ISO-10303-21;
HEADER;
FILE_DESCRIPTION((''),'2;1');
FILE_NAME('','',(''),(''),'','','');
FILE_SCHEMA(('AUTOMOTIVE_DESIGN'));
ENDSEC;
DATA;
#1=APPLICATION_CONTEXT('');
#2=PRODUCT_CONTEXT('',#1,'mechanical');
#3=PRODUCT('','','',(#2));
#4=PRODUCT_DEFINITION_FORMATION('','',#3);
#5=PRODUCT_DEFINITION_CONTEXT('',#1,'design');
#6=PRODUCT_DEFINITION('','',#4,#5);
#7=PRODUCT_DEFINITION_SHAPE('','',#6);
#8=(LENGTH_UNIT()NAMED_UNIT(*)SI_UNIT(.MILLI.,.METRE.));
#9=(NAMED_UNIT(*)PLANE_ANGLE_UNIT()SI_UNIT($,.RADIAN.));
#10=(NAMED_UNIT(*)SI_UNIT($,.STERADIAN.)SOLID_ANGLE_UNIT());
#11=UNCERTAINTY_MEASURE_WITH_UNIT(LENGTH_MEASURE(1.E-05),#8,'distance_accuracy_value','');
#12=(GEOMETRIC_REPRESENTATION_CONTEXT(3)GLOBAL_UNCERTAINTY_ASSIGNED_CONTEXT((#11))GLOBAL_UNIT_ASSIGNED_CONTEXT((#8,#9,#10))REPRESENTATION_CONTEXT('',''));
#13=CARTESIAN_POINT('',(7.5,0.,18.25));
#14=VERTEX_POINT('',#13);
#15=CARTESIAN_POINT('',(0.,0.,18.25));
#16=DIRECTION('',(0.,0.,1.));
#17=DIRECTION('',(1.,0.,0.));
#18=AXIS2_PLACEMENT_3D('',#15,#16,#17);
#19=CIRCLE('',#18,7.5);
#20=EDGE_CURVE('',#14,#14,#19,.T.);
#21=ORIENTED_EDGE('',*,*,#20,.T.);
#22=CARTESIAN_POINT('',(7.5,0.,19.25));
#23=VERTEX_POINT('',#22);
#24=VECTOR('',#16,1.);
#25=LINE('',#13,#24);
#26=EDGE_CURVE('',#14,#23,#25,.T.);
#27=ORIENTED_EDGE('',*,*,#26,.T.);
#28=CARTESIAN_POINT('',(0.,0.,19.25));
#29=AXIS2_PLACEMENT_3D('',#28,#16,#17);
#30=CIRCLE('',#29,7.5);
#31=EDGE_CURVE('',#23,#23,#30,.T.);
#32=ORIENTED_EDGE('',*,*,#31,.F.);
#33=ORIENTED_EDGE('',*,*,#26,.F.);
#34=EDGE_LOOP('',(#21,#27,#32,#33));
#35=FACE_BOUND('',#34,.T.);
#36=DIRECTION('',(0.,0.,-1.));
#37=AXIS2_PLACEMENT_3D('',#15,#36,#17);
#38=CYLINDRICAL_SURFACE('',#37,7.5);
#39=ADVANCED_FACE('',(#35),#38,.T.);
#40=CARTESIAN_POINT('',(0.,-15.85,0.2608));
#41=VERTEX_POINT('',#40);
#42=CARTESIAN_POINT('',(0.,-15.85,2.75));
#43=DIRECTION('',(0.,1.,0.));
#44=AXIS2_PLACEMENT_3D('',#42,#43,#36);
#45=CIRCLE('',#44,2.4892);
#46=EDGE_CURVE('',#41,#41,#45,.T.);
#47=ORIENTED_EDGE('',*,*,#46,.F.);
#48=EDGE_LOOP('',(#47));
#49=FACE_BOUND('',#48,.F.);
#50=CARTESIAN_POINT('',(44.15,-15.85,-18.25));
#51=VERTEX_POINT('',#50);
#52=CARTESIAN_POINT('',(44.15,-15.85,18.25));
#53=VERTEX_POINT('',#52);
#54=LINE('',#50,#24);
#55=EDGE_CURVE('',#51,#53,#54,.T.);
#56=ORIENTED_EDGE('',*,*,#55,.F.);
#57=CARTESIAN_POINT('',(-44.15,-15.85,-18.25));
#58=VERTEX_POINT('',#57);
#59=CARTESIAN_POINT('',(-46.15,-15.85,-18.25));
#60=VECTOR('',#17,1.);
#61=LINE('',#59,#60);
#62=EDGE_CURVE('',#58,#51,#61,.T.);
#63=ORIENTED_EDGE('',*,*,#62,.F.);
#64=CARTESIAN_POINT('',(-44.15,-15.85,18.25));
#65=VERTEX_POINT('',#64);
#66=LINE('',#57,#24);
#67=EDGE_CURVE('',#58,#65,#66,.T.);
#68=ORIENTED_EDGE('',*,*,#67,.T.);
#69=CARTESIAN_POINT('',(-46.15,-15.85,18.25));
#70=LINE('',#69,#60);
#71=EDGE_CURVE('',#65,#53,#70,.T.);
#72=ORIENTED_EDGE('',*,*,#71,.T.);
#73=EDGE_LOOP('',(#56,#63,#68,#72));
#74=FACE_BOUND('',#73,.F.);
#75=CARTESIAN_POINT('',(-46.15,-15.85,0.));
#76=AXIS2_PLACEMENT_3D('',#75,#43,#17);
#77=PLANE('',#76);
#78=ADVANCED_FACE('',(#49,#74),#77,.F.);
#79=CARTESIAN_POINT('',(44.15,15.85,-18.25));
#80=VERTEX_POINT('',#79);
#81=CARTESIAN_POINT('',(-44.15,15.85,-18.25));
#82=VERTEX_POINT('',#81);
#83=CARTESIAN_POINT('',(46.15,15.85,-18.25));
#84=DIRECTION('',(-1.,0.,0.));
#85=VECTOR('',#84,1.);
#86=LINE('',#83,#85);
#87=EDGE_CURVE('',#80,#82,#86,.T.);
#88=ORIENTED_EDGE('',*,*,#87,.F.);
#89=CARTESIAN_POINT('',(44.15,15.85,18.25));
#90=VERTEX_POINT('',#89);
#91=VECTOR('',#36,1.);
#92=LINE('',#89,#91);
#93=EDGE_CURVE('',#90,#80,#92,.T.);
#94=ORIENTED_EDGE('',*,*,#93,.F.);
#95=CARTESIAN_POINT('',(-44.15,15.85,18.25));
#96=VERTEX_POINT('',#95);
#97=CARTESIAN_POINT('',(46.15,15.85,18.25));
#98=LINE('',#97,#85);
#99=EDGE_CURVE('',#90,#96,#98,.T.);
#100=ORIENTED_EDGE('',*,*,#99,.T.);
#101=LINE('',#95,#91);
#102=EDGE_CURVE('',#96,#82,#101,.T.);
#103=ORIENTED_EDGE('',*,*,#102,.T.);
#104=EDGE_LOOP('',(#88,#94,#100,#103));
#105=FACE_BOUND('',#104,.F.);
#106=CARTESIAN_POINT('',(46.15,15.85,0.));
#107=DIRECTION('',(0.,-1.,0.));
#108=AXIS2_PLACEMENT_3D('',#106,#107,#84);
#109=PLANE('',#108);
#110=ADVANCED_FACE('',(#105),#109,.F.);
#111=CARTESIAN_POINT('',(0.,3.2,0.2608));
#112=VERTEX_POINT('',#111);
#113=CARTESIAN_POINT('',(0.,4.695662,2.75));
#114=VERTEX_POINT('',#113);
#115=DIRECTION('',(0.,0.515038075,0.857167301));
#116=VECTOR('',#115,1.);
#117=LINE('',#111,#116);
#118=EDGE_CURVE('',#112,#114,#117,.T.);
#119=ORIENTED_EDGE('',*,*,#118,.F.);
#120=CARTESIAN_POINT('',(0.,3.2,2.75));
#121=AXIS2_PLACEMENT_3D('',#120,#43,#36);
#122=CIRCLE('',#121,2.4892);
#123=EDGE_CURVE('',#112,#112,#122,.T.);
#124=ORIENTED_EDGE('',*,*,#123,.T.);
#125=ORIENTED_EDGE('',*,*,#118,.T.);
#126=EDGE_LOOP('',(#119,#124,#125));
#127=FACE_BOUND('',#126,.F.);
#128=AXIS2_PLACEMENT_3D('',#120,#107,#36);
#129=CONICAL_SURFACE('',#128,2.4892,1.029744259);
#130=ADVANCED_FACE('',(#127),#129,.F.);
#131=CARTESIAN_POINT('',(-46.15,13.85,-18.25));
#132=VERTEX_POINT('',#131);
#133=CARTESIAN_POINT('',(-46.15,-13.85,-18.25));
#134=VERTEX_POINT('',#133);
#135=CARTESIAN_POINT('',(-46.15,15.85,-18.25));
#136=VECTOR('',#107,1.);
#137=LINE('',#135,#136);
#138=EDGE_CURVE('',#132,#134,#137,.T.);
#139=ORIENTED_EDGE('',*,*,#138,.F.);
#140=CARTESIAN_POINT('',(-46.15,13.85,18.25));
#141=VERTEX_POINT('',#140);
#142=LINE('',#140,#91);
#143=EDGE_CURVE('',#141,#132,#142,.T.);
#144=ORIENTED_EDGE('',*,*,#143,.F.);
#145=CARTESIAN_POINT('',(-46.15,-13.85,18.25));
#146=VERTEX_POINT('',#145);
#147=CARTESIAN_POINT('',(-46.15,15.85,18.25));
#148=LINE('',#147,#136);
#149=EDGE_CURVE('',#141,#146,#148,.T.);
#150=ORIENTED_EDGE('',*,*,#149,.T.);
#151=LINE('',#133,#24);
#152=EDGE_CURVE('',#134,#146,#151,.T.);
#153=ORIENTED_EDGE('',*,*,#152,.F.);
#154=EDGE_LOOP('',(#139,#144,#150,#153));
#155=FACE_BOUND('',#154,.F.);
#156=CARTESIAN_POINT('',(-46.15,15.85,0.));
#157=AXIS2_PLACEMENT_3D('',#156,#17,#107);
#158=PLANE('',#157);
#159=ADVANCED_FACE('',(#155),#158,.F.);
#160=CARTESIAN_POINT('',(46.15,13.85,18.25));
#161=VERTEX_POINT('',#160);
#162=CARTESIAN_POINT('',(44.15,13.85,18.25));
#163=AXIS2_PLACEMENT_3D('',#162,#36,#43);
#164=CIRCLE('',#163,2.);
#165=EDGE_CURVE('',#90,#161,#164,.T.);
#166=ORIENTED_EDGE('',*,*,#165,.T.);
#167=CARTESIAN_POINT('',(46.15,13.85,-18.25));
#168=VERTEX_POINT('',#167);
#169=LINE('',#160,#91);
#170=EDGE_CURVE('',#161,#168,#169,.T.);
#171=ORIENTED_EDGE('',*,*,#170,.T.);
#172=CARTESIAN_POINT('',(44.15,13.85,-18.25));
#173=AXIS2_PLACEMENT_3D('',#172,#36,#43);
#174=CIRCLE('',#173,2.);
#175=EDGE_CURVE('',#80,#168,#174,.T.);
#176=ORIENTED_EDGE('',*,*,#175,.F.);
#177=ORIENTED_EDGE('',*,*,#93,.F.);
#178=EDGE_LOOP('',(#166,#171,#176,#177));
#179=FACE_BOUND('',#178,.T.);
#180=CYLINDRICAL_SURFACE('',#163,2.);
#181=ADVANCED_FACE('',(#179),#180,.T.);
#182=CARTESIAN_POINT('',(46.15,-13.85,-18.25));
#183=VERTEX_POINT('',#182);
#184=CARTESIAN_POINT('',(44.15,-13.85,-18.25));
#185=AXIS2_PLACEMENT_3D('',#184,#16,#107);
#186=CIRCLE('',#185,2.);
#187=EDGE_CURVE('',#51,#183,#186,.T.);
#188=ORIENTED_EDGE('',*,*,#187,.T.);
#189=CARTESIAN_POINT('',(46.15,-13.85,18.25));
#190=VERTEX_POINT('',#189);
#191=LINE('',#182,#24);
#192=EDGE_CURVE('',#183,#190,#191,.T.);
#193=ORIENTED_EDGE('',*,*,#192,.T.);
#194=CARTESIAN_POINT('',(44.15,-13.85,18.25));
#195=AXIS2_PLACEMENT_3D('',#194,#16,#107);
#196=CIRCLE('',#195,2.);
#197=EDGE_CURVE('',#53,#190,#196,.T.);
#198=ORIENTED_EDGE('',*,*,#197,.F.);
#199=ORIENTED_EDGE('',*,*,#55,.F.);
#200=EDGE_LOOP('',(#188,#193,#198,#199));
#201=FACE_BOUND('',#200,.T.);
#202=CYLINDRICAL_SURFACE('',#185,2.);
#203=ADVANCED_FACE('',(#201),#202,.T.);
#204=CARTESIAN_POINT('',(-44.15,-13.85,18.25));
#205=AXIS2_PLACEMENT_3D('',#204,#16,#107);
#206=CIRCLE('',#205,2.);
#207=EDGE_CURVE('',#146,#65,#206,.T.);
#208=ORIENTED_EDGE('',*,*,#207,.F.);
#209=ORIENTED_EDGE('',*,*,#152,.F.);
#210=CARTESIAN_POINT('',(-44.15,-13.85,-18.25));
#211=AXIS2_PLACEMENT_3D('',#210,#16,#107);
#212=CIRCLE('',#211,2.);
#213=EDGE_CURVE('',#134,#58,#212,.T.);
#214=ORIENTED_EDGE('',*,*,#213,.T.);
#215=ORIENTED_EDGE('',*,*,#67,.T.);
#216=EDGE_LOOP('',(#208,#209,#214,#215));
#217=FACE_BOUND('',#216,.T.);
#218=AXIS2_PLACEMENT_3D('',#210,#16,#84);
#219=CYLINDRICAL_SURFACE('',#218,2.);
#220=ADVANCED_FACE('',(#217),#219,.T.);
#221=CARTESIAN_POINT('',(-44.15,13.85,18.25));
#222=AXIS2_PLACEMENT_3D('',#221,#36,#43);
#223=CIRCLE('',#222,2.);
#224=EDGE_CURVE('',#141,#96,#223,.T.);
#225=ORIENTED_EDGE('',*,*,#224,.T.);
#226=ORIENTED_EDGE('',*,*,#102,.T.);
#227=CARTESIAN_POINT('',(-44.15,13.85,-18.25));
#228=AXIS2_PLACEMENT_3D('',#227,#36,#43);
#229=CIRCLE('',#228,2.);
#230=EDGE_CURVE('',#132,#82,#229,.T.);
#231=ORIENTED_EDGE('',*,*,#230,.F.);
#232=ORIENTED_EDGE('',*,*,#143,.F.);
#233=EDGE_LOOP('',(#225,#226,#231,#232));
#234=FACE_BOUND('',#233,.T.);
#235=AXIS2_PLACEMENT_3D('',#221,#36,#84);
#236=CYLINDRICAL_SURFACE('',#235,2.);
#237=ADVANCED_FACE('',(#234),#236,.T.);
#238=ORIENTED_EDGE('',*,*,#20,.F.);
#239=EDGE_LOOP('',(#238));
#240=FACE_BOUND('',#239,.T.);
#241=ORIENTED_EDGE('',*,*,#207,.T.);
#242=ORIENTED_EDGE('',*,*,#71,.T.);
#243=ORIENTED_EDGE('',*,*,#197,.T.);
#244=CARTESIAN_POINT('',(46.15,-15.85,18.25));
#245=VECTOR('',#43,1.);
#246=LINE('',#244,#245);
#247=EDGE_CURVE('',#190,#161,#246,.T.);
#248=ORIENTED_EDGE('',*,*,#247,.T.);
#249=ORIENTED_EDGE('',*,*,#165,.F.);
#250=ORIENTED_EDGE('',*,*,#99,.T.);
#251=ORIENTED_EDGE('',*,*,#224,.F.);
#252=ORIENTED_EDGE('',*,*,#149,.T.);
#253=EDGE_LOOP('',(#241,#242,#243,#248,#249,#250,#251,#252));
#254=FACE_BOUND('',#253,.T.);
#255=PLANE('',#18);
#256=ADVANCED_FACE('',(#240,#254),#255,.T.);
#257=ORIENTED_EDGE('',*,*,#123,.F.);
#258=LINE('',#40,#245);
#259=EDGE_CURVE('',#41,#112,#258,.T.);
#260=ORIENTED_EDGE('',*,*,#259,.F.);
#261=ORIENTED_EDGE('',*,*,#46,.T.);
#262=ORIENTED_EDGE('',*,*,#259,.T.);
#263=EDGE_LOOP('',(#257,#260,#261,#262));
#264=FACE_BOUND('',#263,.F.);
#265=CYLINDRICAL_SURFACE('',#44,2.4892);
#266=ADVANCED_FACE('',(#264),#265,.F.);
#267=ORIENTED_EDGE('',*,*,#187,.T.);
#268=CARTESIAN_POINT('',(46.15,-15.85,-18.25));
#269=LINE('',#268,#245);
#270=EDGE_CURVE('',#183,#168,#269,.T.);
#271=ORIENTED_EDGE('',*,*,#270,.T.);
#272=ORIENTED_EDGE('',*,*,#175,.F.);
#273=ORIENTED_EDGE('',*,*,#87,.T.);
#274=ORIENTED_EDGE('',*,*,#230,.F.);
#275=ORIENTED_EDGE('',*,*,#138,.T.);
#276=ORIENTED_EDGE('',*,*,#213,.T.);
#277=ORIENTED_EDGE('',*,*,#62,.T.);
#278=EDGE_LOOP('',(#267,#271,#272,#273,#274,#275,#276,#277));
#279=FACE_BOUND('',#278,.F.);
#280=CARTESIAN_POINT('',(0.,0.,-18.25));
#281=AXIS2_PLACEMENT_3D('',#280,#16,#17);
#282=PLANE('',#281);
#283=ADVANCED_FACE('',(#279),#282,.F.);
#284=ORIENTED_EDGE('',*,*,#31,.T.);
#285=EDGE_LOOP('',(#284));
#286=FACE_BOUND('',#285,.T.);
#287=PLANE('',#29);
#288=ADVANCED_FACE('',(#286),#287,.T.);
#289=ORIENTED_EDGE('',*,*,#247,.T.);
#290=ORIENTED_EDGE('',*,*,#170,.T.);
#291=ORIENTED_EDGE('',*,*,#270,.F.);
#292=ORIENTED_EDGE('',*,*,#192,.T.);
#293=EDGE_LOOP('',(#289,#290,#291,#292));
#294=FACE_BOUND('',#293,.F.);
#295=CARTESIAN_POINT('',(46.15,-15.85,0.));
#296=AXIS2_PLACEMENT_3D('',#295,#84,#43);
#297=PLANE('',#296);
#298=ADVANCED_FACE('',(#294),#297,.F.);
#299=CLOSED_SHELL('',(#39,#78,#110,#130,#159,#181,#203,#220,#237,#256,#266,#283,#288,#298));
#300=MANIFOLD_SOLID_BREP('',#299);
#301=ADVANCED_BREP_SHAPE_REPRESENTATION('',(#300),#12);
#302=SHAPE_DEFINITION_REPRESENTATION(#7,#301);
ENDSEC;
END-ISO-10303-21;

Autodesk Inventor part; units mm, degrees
ref_plane "YZ Plane" through (0, 0, 0) normal (1, 0, 0) x (0, 1, 0)
ref_plane "XZ Plane" through (0, 0, 0) normal (0, 1, 0) x (-1, 0, 0)
ref_plane "XY Plane" through (0, 0, 0) normal (0, 0, 1) x (1, 0, 0)
sketch "スケッチ2" plane through (0, 0, 0) normal (0, 0, 1) x (1, 0, 0)
  line L0 (-46.15, -15.85) -> (46.15, -15.85)
  line L1 (46.15, -15.85) -> (46.15, 15.85)
  line L2 (46.15, 15.85) -> (-46.15, 15.85)
  line L3 (-46.15, 15.85) -> (-46.15, -15.85)
  line L4 (-46.15, -15.85) -> (46.15, 15.85) construction
  line L5 (46.15, -15.85) -> (-46.15, 15.85) construction
  point P0 (0, 0)
  dimension "d4" = 92.3
  dimension "d5" = 31.7
extrude "押し出し2" add sketch "スケッチ2" along normal mid plane 36.5
fillet "フィレット1" radius 2 4 edges at (46.15, 15.85, 0) (46.15, -15.85, 0) (-46.15, 15.85, 0) (-46.15, -15.85, 0)
sketch "スケッチ3" plane through (-44.15, -15.85, -18.25) normal (0, -1, 0) x (1, 0, 0)
  line L0 (-2, 36.5) -> (-2, 0) projected
  line L1 (0, 36.5) -> (88.3, 36.5) projected
  point P0 (44.15, 18.25)
  point P1 (44.15, 21)
  dimension "d9" = 46.15
  dimension "d10" = 15.5
hole "穴1" at (0, -15.85, 2.75) direction (0, 1, 0) diameter 4.9784 depth 19.05 tip angle 118 thread size "1/4-20 UNC" class "2B" standard "ANSI Unified Screw Threads"
sketch "スケッチ4" plane through (0, 0, 18.25) normal (0, 0, 1) x (1, 0, 0)
  circle A0 centre (0, 0) radius 7.5
  dimension "d18" = 15
extrude "押し出し3" add sketch "スケッチ4" along normal blind 1
properties part number "zed_x_mini"
